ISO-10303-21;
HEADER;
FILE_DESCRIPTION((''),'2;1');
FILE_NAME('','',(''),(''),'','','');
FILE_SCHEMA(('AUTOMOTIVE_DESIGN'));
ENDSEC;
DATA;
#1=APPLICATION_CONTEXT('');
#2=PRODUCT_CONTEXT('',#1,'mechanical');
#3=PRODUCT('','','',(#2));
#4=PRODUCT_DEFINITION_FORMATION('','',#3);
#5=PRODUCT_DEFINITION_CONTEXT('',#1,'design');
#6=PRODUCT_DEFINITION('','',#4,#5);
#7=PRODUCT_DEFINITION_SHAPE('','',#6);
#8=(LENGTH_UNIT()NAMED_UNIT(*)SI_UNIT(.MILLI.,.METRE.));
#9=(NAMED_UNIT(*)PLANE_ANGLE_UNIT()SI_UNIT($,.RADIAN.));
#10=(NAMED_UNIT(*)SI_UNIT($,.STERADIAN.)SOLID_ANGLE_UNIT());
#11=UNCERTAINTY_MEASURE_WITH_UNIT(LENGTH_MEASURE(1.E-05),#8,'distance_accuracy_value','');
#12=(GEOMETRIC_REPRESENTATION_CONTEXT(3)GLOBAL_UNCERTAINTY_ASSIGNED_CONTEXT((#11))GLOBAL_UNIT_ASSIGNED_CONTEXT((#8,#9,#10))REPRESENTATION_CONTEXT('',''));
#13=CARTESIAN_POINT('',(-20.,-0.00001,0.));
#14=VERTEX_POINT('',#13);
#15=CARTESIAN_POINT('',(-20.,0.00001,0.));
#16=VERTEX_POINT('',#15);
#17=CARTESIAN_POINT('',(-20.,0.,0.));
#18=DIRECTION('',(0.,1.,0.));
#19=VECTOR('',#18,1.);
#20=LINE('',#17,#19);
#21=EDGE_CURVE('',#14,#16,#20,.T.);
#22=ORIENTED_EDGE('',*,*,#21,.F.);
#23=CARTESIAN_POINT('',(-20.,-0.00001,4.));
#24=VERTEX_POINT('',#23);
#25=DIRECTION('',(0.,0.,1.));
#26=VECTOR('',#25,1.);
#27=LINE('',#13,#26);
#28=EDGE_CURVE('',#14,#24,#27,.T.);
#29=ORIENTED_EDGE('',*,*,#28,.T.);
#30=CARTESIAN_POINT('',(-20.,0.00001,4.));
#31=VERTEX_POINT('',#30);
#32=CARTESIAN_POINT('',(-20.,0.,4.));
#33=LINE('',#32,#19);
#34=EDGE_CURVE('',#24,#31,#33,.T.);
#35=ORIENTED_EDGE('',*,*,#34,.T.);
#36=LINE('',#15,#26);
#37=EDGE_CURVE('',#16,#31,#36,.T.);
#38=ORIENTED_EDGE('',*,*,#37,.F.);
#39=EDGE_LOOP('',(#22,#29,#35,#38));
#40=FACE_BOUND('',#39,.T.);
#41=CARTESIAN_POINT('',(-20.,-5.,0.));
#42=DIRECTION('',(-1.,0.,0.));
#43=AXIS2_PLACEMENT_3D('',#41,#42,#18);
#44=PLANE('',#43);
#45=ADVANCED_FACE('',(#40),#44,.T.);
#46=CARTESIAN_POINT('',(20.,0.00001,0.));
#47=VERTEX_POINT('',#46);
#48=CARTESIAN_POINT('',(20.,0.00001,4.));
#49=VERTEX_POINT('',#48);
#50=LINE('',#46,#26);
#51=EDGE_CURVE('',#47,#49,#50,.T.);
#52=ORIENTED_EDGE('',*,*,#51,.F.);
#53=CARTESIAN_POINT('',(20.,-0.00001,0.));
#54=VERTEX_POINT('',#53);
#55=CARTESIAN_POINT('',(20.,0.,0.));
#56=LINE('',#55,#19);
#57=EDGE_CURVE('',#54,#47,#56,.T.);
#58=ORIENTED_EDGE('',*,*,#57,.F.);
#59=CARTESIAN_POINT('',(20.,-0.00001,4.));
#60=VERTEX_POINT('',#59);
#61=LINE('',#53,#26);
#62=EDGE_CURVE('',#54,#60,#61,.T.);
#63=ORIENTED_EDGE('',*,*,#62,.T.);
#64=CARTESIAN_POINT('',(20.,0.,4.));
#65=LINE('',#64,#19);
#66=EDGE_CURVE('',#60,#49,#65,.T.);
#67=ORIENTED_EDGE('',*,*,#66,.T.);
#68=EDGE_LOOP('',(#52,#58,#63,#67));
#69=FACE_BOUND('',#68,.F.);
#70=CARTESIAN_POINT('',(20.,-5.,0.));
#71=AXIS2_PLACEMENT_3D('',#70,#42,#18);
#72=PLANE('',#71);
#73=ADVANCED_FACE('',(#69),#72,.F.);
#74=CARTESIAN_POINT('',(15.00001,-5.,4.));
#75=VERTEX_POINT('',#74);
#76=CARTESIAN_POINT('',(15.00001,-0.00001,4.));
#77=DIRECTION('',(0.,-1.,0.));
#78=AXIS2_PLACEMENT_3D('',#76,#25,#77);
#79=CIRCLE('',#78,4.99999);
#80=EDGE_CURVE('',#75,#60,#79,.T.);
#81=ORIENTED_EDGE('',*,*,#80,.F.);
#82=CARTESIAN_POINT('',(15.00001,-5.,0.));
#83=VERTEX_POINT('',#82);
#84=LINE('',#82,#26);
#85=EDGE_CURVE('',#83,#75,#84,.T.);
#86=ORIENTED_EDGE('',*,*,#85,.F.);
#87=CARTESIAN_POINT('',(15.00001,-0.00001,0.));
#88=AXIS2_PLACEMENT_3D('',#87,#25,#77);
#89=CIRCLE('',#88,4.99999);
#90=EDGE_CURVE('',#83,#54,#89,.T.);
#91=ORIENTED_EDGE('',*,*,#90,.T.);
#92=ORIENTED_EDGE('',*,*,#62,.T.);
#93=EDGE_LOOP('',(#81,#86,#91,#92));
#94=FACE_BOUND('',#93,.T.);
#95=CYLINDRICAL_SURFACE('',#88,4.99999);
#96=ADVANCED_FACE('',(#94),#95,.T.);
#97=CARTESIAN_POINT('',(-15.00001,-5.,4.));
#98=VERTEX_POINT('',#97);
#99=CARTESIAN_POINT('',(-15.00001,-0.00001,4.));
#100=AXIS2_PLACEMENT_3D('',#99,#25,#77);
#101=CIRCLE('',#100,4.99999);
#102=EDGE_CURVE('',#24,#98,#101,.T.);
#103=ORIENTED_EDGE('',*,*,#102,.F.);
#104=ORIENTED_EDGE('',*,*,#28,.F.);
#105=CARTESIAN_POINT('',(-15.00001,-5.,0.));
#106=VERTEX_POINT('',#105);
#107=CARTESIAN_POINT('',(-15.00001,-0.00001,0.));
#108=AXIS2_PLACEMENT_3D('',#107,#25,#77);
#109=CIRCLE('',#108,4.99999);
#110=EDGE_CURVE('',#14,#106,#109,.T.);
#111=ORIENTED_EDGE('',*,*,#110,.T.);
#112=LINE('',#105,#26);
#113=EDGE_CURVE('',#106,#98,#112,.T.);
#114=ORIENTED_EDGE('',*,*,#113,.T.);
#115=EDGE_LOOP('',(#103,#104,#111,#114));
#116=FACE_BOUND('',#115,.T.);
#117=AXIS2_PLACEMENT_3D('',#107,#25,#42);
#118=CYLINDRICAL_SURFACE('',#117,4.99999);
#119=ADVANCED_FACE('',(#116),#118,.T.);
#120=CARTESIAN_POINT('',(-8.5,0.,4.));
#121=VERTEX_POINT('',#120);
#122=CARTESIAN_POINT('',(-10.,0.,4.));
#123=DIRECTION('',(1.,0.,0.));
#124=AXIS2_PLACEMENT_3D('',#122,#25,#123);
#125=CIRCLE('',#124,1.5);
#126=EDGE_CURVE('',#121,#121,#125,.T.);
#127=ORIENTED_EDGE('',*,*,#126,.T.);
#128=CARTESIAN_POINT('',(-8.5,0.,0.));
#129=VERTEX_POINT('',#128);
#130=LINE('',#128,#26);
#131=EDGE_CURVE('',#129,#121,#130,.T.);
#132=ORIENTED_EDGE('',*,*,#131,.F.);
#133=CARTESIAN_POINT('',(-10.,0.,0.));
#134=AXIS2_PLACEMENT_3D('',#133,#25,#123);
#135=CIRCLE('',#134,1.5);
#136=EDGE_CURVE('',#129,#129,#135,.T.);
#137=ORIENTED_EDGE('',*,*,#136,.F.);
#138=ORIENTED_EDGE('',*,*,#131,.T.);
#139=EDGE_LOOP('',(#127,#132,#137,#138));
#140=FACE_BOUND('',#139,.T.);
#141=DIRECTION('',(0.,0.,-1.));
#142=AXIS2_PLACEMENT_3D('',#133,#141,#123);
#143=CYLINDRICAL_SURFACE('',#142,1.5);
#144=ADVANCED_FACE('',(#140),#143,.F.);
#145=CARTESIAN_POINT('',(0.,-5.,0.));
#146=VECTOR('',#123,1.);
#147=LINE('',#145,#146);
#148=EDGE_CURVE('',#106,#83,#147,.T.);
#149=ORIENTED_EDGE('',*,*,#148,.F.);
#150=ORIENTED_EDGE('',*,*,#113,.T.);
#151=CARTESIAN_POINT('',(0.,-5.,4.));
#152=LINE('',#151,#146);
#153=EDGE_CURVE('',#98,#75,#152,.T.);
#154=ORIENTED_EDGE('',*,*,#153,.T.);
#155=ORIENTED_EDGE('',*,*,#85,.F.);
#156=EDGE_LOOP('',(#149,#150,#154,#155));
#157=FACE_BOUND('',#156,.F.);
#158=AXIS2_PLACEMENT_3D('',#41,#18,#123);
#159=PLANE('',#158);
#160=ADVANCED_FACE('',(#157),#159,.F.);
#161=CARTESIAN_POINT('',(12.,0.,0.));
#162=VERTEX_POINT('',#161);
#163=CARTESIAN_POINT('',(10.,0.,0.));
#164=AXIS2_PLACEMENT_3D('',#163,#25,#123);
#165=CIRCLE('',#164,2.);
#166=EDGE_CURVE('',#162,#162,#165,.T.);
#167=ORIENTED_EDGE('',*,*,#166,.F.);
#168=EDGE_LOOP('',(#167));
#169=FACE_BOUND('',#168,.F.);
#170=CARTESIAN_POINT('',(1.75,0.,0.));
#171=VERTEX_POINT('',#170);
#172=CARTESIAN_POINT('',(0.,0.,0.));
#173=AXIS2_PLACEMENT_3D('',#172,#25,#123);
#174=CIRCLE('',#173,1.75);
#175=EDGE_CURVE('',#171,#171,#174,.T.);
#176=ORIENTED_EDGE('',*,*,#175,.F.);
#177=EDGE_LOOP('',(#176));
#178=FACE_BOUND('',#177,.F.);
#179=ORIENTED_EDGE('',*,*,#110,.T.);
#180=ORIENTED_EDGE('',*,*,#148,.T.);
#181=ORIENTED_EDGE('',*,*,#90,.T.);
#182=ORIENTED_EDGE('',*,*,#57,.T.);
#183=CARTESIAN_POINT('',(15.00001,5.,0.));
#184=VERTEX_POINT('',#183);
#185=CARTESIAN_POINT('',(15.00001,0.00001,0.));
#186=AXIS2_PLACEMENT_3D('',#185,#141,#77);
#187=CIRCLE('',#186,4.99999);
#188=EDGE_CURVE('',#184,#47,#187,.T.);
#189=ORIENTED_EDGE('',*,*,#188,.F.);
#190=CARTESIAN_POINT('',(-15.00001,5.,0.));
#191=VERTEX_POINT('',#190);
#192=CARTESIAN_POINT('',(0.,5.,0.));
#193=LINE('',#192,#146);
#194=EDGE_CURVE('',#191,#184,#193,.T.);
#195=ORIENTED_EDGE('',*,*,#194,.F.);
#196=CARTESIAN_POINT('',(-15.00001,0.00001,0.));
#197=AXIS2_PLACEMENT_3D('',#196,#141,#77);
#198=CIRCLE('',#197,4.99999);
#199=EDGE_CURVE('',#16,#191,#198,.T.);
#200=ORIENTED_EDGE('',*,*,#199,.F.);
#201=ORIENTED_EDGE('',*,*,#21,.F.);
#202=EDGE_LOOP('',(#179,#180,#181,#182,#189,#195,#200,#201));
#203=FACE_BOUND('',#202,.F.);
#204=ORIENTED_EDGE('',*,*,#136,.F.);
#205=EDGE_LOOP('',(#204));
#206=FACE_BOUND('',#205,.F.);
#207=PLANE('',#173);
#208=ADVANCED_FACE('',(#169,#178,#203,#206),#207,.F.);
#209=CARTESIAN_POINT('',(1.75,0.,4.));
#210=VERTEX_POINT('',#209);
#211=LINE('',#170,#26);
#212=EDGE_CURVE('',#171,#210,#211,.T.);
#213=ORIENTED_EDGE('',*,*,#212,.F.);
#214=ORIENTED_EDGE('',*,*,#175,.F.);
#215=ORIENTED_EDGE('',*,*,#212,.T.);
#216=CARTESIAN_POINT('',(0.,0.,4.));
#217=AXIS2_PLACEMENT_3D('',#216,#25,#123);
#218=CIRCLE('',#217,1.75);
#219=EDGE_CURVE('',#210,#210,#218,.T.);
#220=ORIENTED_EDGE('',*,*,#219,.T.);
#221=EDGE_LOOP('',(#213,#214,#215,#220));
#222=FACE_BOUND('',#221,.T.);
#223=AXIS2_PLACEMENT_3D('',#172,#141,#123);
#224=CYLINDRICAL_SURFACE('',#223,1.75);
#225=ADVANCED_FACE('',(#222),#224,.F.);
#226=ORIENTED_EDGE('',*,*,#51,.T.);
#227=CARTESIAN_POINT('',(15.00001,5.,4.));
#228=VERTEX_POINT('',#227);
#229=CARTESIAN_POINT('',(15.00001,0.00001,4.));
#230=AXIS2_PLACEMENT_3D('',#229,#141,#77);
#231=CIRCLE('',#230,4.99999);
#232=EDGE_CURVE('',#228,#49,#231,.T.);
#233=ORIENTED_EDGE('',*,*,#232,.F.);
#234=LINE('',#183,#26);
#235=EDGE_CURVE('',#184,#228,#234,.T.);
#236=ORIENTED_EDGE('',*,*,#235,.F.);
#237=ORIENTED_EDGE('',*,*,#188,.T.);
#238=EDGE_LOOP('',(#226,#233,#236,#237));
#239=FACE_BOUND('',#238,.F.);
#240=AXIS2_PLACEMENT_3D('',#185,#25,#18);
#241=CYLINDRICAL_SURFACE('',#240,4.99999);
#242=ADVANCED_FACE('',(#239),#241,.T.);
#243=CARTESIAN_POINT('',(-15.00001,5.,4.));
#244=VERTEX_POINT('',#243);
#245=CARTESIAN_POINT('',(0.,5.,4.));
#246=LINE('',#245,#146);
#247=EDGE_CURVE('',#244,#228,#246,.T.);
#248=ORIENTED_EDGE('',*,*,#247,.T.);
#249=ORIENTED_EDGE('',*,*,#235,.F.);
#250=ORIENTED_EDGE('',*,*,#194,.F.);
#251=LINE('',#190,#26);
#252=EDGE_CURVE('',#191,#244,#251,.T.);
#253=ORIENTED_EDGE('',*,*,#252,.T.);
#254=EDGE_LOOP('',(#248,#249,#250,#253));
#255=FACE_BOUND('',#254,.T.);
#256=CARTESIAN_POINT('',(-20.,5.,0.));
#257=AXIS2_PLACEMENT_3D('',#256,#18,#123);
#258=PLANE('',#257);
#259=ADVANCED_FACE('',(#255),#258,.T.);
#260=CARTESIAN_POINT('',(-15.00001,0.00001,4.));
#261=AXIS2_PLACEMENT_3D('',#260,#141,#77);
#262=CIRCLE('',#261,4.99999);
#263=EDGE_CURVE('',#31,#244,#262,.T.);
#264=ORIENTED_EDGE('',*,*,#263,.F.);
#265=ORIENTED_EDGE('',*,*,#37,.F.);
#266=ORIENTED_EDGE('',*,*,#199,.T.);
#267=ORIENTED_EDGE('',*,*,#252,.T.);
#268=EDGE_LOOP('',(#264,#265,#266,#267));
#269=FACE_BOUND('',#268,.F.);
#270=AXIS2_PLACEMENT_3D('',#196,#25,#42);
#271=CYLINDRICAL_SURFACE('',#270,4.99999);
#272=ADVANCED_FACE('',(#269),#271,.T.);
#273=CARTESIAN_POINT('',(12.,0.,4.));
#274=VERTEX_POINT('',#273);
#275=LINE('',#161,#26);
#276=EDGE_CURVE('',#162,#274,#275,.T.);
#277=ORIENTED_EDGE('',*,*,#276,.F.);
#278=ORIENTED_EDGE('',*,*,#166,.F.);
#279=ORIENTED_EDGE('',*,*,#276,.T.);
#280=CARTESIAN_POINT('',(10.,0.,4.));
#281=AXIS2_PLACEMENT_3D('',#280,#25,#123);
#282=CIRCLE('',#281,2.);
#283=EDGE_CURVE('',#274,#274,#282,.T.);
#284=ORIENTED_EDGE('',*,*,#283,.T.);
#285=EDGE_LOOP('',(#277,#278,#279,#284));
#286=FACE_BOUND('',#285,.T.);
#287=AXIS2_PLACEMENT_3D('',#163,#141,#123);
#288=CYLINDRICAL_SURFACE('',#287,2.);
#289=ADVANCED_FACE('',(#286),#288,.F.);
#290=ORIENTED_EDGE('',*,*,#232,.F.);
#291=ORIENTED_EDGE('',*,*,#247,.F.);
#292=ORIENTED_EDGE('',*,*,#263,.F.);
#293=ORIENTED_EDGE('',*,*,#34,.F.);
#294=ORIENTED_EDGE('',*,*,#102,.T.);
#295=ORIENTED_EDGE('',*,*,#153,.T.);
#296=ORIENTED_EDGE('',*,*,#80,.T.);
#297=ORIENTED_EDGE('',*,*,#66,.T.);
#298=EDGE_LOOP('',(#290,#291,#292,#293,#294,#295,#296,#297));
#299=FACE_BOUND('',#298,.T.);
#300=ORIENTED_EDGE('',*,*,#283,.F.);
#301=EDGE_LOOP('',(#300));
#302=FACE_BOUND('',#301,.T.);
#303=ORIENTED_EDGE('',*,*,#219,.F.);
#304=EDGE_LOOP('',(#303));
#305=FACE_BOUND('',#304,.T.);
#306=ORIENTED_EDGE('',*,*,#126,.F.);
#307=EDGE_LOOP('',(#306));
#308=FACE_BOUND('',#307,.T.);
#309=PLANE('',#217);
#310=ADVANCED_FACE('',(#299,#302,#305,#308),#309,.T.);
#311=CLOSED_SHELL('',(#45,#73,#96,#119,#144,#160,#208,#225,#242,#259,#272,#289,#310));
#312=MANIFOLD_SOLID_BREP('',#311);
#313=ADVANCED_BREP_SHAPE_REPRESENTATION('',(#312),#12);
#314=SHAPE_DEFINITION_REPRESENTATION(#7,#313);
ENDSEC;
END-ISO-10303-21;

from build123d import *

# Parameters (mm, degrees)
F0_W     = 40
F0_H     = 10
F0_R     = 1.5
F0_R_2   = 1.75
F0_R_3   = 2
F1_DEPTH = 4
F2_R     = 4.99999


# Not quite as in the source:
# - a fillet or chamfer is up to 0.001 mm smaller than in the source, because OpenCascade refuses the exact size


with BuildPart() as f1:
    # F0 (on Top) → F1 (new body)
    with BuildSketch(Plane.XY):
        Rectangle(F0_W, F0_H)
        with Locations((-10, 0)):
            Circle(F0_R, mode=Mode.SUBTRACT)
        Circle(F0_R_2, mode=Mode.SUBTRACT)
        with Locations((10, 0)):
            Circle(F0_R_3, mode=Mode.SUBTRACT)
    extrude(amount=F1_DEPTH)

    # F2 (radius 5 in the source; OpenCascade refuses exactly that, so slightly less here)
    f2_edges = [f1.edges().sort_by_distance(p)[0] for p in [
        (-20, 5, 2),
        (-20, -5, 2),
        (20, -5, 2),
        (20, 5, 2),
    ]]
    fillet(f2_edges, radius=F2_R)


solid = f1.part
